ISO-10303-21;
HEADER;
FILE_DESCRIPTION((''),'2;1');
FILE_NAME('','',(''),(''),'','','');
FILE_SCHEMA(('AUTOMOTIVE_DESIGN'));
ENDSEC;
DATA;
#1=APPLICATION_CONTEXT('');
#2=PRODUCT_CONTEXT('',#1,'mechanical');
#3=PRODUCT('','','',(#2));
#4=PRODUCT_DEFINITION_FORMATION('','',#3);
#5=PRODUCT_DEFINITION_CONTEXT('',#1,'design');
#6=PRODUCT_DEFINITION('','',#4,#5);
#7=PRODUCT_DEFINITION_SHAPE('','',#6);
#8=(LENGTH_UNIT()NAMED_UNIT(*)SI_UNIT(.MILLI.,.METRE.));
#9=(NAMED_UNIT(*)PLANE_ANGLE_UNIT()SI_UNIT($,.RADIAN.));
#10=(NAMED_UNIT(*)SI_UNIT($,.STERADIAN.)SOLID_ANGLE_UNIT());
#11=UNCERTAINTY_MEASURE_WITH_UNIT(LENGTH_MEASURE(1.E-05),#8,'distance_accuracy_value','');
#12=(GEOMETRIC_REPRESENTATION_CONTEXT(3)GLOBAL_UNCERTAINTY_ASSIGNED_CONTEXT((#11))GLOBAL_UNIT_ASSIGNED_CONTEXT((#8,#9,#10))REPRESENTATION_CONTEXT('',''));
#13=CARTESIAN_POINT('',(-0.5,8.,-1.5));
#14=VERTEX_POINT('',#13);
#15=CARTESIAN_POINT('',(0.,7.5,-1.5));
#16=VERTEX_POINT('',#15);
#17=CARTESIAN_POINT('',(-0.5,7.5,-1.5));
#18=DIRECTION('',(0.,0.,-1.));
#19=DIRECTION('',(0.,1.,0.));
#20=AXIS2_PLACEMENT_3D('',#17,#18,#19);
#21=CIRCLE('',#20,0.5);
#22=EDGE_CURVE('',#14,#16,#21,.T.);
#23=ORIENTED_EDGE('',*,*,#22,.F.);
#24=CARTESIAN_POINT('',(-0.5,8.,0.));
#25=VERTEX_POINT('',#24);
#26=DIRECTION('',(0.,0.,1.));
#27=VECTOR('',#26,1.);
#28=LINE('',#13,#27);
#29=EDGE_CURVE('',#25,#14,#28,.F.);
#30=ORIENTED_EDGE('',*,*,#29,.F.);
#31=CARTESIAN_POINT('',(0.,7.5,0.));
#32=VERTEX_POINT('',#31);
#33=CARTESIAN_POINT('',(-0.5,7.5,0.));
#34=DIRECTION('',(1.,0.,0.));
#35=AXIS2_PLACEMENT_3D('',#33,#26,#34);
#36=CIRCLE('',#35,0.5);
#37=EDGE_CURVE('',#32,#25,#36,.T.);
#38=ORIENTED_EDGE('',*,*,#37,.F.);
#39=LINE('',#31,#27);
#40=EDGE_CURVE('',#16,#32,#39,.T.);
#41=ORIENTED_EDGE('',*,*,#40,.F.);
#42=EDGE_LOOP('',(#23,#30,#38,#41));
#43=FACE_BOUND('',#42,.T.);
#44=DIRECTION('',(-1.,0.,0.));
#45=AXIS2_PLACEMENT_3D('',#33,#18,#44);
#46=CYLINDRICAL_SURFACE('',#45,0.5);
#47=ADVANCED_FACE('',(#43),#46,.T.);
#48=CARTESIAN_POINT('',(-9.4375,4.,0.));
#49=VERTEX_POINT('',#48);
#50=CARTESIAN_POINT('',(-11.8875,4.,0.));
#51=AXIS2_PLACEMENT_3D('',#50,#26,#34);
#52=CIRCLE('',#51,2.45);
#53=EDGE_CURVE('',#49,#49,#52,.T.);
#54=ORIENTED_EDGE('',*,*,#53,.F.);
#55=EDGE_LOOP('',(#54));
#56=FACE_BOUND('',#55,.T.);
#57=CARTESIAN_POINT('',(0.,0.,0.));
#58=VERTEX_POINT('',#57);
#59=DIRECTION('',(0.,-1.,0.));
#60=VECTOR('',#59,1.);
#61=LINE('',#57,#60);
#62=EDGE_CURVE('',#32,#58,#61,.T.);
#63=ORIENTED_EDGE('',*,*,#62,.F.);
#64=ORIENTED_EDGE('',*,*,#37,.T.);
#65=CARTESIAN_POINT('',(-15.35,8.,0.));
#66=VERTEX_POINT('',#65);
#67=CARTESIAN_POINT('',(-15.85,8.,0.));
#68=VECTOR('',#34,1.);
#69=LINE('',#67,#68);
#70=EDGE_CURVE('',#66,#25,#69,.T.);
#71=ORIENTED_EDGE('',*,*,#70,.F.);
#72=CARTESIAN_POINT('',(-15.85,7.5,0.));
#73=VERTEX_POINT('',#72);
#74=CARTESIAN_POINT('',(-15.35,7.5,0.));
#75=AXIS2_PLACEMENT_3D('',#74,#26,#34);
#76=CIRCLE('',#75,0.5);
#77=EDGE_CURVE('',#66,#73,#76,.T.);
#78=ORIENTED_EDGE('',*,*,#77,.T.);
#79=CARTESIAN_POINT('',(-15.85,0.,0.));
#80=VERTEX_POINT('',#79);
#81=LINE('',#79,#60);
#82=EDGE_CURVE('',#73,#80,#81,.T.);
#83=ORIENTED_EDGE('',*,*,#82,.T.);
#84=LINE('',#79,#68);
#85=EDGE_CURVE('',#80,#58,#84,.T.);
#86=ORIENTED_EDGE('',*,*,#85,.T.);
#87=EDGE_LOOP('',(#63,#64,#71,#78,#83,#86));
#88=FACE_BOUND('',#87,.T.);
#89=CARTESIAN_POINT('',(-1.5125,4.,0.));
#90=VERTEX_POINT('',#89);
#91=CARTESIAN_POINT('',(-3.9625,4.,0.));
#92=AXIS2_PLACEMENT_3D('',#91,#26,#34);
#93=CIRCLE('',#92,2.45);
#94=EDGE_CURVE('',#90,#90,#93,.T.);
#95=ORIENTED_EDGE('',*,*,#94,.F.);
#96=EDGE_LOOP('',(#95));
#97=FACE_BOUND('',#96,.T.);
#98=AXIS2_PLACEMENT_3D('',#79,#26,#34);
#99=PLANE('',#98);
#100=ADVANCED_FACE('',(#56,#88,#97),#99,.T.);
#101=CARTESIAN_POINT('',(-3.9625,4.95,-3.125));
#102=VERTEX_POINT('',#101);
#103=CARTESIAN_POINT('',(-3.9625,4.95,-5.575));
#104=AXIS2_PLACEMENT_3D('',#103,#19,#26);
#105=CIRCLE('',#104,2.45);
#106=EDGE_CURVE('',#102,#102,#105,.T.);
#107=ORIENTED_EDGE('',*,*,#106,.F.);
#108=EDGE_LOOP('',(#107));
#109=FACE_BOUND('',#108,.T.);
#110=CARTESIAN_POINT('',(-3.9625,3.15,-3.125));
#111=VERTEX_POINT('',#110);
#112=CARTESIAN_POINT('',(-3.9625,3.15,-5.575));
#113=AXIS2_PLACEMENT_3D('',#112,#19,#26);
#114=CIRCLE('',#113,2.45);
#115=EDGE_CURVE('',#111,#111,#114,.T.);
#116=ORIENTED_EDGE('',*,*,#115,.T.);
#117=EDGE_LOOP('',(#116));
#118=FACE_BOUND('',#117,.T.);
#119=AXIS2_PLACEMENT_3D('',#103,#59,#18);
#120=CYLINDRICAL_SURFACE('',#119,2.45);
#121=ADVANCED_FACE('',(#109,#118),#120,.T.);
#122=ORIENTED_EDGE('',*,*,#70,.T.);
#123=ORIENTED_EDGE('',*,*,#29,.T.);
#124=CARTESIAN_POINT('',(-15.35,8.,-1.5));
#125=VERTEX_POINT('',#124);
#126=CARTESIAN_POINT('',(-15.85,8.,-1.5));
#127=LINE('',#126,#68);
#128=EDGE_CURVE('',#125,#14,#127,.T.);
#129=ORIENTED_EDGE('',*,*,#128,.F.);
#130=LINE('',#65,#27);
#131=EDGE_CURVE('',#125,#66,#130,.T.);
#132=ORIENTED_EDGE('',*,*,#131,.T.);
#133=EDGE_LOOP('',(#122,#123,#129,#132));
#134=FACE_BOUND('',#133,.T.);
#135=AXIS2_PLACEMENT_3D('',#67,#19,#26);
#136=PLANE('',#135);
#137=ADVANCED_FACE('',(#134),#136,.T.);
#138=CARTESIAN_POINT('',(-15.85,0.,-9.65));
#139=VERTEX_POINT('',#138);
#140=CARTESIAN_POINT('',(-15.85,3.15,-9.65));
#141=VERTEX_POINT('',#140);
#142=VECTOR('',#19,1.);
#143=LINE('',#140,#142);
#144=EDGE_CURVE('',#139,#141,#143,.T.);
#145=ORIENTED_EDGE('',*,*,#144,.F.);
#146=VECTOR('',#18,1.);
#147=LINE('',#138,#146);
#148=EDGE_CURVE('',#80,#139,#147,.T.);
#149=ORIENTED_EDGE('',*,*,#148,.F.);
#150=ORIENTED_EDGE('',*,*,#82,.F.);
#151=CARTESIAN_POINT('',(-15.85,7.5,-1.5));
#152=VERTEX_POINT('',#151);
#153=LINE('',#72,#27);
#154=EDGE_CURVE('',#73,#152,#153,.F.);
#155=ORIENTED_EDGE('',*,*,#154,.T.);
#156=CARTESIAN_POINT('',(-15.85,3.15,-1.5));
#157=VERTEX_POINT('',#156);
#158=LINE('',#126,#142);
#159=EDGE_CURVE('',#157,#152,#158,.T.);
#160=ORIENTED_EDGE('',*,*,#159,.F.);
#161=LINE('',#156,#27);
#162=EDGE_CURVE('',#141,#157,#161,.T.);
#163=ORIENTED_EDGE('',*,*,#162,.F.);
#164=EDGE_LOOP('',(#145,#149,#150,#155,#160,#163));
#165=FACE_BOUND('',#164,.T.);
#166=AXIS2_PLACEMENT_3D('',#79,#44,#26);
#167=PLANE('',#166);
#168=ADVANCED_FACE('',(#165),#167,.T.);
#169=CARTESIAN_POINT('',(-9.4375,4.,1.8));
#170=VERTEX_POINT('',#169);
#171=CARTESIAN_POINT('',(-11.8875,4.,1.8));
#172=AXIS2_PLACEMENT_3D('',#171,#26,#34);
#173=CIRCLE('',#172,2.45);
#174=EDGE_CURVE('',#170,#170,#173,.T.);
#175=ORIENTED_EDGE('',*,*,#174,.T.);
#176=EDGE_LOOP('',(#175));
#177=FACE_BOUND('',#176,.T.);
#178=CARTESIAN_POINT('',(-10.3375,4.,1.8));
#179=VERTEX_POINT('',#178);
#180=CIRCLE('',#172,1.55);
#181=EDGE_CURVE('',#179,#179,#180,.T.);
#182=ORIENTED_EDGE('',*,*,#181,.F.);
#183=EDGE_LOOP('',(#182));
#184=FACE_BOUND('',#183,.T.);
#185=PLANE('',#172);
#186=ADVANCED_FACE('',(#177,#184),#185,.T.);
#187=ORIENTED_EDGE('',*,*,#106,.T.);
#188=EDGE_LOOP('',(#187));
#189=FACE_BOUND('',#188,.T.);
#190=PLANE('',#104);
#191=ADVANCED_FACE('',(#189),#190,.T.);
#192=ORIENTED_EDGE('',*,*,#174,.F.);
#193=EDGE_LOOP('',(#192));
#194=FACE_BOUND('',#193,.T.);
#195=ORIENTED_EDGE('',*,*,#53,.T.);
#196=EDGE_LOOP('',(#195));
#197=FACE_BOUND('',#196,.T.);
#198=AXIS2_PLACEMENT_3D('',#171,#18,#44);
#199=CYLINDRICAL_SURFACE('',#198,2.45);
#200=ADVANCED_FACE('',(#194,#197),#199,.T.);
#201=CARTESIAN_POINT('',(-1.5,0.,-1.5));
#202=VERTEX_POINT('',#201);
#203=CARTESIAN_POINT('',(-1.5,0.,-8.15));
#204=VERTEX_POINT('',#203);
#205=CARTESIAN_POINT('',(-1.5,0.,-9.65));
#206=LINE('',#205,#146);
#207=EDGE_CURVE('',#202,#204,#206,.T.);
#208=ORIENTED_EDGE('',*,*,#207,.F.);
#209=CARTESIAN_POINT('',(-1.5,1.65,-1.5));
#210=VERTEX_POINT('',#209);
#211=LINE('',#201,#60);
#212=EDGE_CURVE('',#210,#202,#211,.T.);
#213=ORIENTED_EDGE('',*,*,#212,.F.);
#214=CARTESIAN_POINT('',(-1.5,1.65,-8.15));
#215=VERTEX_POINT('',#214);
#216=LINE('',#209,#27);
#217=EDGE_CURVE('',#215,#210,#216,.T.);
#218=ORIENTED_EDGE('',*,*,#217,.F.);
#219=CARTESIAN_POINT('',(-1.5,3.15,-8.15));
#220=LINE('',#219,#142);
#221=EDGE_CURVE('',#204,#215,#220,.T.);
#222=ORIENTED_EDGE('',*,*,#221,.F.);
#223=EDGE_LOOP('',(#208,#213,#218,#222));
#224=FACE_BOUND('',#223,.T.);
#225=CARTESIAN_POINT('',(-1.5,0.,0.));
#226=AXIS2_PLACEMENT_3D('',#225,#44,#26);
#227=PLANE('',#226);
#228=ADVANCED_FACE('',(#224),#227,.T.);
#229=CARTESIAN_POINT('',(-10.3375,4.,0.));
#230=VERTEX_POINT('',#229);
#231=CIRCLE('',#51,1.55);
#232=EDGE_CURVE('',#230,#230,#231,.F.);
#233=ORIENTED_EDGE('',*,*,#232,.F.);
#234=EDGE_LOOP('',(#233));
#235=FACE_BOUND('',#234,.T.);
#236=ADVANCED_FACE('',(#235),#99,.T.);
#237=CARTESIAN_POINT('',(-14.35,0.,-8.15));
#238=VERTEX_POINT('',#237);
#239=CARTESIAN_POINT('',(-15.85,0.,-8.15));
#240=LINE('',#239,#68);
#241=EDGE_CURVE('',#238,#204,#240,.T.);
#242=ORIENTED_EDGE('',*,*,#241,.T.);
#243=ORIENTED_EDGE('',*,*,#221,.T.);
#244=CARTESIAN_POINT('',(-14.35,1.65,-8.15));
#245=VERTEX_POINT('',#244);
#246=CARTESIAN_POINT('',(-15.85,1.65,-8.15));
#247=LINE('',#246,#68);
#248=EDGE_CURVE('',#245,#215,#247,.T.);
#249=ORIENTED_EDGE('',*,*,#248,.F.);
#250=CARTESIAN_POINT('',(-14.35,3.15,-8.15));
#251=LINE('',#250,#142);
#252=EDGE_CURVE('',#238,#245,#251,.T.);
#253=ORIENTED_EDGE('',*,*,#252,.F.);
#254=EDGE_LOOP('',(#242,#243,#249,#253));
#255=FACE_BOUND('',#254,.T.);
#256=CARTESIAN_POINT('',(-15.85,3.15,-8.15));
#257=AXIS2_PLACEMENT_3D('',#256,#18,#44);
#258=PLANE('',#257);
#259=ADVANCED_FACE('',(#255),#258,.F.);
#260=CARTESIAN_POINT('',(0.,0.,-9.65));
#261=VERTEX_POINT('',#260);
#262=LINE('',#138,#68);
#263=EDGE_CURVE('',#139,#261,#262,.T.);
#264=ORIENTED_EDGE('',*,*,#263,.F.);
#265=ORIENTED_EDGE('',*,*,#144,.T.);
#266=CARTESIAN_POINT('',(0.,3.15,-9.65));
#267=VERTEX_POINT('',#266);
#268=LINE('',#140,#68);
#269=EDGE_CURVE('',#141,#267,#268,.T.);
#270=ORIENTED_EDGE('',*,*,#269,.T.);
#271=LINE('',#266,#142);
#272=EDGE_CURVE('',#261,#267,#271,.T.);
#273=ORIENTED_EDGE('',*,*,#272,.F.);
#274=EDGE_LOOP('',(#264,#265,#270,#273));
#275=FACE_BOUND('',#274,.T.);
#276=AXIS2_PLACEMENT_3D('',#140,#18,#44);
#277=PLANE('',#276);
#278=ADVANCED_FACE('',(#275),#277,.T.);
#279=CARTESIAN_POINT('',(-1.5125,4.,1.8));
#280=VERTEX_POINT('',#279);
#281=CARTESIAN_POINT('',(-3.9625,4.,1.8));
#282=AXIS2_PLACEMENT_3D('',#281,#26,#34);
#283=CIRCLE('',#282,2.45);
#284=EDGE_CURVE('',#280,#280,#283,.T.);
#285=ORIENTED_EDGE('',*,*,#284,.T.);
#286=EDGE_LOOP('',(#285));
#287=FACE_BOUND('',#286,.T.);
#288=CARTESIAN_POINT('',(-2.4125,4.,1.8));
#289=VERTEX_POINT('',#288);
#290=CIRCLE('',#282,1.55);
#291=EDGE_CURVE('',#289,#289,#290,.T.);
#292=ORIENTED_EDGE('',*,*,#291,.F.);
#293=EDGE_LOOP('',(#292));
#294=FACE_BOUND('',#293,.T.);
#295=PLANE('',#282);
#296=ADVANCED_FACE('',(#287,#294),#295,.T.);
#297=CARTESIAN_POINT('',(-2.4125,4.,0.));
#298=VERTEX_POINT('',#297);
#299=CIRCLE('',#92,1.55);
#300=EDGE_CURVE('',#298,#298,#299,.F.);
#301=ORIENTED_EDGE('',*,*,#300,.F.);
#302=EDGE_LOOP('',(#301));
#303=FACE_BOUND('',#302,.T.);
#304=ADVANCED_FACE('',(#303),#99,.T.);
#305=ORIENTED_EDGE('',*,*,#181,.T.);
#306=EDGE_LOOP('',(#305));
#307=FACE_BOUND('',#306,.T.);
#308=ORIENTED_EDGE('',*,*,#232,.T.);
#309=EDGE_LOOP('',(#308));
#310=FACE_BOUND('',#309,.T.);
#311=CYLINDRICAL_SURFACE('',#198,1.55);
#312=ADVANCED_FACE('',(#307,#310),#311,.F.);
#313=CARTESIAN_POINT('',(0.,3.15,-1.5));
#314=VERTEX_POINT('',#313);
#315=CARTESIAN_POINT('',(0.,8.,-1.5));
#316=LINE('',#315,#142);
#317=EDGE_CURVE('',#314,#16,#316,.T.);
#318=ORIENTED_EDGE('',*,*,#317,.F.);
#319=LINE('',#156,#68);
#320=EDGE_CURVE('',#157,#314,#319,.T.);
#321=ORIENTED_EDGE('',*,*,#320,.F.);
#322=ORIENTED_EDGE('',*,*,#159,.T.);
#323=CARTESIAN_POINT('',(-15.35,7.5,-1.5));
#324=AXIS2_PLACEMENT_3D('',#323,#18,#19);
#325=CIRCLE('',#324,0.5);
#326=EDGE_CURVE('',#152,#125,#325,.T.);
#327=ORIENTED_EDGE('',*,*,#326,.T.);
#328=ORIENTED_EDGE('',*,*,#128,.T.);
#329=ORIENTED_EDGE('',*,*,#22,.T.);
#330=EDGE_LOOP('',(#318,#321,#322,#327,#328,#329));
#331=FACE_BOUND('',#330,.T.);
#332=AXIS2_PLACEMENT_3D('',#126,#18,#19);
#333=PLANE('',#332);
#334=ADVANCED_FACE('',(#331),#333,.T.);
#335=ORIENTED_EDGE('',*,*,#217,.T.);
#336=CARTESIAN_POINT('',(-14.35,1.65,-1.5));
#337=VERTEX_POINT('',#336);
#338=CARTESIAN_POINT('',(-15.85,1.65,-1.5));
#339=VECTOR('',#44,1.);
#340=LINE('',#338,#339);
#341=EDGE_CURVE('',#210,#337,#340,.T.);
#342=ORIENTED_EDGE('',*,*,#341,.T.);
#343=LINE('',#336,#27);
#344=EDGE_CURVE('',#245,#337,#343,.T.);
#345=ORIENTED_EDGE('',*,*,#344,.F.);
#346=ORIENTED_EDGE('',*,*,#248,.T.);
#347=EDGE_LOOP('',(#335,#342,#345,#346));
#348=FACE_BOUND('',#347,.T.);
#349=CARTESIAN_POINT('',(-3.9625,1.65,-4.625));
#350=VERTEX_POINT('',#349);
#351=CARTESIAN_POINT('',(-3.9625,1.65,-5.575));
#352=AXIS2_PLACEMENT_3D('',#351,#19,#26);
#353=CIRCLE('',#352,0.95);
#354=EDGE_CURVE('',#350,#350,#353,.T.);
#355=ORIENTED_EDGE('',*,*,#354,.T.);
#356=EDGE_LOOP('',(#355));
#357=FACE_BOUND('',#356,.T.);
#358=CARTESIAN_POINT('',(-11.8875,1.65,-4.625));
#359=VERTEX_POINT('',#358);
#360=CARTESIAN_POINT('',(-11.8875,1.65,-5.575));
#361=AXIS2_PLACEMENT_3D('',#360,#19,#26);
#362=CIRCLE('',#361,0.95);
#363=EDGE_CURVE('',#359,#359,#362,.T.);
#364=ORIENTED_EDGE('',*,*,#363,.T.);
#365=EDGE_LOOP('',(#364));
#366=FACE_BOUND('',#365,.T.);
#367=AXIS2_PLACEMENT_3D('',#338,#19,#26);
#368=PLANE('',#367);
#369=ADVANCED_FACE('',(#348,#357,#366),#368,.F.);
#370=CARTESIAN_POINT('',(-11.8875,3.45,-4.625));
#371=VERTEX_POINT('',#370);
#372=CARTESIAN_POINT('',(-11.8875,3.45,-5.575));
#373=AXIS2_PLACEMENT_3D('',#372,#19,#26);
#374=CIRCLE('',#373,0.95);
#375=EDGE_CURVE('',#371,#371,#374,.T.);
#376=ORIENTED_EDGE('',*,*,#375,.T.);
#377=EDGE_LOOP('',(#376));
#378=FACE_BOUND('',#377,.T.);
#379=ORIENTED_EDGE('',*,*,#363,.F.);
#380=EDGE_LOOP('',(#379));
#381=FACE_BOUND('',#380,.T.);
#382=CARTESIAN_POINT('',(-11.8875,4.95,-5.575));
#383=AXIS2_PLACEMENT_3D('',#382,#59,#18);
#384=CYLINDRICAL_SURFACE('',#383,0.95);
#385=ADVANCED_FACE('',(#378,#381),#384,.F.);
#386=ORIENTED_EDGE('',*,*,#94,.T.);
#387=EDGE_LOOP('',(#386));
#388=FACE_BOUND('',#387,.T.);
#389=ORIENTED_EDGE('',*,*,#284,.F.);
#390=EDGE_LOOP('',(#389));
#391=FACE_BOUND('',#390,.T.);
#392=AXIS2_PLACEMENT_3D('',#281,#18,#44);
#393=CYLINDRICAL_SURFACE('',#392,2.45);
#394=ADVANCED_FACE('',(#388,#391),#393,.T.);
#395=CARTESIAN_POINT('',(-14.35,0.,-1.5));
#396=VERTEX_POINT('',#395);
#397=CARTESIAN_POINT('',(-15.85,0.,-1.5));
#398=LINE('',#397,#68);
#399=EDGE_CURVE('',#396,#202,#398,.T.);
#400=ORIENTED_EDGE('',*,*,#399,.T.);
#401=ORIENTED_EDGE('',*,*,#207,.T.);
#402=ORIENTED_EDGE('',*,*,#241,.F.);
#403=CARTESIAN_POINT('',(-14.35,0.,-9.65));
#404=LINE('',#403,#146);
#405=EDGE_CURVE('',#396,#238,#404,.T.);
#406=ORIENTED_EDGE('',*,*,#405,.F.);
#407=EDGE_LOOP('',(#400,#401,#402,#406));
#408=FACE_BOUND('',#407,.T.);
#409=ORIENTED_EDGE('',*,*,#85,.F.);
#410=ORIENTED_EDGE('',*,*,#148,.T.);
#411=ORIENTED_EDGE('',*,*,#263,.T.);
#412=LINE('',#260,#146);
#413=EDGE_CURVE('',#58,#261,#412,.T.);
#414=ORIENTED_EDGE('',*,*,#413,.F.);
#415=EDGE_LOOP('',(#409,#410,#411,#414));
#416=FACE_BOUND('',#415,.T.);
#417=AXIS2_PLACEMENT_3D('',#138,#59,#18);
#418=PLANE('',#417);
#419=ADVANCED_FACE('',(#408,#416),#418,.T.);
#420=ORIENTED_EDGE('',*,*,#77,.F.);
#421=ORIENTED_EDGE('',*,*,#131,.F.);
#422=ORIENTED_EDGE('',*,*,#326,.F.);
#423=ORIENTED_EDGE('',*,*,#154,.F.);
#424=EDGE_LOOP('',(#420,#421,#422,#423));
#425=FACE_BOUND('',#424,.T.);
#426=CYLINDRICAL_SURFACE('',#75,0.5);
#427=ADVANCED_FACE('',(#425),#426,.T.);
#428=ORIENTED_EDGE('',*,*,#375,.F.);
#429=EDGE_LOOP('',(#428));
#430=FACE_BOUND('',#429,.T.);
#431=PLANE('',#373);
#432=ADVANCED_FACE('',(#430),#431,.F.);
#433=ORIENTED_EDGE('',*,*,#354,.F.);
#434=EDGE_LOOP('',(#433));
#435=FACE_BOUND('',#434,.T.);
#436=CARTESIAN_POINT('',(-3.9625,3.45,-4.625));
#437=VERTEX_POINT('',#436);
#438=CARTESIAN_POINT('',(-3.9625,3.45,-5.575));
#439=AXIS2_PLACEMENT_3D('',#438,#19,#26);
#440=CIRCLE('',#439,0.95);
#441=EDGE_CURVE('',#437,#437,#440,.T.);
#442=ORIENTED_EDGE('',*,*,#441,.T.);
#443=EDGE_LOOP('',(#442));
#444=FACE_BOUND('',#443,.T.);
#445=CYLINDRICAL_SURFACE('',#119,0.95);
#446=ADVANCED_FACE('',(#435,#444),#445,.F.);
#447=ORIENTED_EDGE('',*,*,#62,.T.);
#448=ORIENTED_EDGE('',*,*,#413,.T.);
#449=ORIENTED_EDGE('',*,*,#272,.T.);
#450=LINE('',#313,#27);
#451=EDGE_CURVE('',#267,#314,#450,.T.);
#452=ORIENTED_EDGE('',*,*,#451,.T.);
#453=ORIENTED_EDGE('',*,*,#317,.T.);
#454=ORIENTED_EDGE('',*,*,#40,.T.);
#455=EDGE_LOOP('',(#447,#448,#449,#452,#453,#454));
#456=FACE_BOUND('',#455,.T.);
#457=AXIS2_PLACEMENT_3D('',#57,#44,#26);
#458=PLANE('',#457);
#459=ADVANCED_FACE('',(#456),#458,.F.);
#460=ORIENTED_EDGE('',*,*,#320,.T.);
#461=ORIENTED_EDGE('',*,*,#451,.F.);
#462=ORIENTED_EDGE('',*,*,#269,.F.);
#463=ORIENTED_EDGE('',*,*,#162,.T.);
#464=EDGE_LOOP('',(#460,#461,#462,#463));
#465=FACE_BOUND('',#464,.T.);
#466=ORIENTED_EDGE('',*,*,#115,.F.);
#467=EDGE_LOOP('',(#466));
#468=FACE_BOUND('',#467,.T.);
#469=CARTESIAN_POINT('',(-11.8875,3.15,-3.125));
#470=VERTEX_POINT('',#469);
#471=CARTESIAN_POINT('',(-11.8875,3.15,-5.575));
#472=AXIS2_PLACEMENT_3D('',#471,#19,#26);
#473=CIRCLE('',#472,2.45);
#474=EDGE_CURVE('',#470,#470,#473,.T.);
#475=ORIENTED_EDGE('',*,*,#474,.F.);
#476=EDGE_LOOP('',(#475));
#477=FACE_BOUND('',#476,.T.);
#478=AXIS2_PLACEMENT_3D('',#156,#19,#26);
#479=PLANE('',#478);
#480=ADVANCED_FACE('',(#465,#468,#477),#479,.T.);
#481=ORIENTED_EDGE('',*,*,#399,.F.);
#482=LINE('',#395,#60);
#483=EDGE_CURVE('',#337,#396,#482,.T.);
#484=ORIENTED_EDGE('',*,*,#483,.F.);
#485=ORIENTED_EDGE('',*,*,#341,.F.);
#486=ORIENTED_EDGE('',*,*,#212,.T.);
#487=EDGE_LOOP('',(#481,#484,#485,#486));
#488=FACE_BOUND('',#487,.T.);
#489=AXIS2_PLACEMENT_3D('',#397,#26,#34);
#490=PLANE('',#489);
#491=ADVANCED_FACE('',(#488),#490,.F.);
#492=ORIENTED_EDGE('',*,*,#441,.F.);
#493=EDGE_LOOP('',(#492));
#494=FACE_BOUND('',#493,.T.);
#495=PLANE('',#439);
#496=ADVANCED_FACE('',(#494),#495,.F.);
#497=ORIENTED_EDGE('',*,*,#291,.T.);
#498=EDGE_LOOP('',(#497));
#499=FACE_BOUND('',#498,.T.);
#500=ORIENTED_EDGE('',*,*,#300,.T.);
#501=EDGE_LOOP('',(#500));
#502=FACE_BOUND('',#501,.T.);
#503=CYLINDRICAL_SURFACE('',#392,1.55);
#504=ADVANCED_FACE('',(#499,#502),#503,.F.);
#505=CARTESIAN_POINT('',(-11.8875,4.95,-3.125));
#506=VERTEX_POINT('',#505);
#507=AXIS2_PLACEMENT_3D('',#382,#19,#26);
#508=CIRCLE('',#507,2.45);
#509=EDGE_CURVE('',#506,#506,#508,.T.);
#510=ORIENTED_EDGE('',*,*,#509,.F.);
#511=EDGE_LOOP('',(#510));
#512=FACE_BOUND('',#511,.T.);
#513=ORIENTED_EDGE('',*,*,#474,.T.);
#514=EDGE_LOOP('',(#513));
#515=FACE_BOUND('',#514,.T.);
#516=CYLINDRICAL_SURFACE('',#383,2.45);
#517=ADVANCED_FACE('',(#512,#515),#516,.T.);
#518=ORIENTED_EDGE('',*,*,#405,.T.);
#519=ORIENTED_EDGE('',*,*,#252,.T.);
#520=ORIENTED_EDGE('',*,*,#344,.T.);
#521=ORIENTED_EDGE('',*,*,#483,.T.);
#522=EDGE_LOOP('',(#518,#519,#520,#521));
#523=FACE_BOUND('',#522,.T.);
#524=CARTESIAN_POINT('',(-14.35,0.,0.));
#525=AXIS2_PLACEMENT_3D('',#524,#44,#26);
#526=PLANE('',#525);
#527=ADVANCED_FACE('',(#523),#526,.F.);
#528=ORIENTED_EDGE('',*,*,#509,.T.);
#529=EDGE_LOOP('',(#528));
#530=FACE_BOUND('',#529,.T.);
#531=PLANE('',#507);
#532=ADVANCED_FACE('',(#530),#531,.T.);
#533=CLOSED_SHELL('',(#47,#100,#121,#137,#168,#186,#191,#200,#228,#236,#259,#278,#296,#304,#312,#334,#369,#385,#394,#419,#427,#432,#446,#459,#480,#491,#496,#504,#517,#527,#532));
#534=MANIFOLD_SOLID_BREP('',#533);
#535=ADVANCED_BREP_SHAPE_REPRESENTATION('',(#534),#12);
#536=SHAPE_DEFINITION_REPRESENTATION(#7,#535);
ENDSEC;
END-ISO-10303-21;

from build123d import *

# Parameters (mm, degrees)
BOSS_EXTRUDE1_DEPTH = 15.85
SKETCH2_R           = 2.45
SKETCH2_R_2         = 1.55
BOSS_EXTRUDE2_DEPTH = 1.8
SKETCH3_R           = 2.45
BOSS_EXTRUDE3_DEPTH = 1.8
SHELL1_OUTLINE_W    = 12.85
SHELL1_OUTLINE_H    = 6.65
SHELL1_DEPTH        = 1.65
SHELL1_START        = 1.65
SHELL1_2_OUTLINE_R  = 0.95
SHELL1_2_DEPTH      = 1.8
FILLET1_R           = 0.5


# Read off the part's stored shape, not the designer's step: Shell1
with BuildPart() as part:
    # Sketch1 → Boss-Extrude1 (new body)
    with BuildSketch(Plane(origin=(0, 0, 0), x_dir=(0, 0, -1), z_dir=(1, 0, 0))):
        Polygon((0, 0), (0, 8), (1.5, 8), (1.5, 3.15), (9.65, 3.15), (9.65, 0), align=None)
    extrude(amount=-BOSS_EXTRUDE1_DEPTH)

    # Sketch2 → Boss-Extrude2 (add)
    # profile 1 of 2: a face of its own
    with BuildSketch(Plane.XY):
        with Locations((-11.8875, 4)):
            Circle(SKETCH2_R)
        with Locations((-11.8875, 4)):
            Circle(SKETCH2_R_2, mode=Mode.SUBTRACT)
    # profile 2 of 2: a face of its own
    with BuildSketch(Plane.XY):
        with Locations((-3.9625, 4)):
            Circle(SKETCH2_R)
        with Locations((-3.9625, 4)):
            Circle(SKETCH2_R_2, mode=Mode.SUBTRACT)
    extrude(amount=BOSS_EXTRUDE2_DEPTH)

    # Sketch3 → Boss-Extrude3 (add)
    with BuildSketch(Plane(origin=(0, 3.15, 0), x_dir=(1, 0, 0), z_dir=(0, 1, 0))):
        with Locations(Location((-11.8875, 5.575, 0), (0, 0, 270))):
            Circle(SKETCH3_R)
        with Locations(Location((-3.9625, 5.575, 0), (0, 0, 270))):
            Circle(SKETCH3_R)
    extrude(amount=BOSS_EXTRUDE3_DEPTH)

    # Shell1 outline → Shell1 (cut)
    with BuildSketch(Plane(origin=(0, 0, 0), x_dir=(1, 0, 0), z_dir=(0, 1, 0))):
        with Locations((-7.925, 4.825)):
            Rectangle(SHELL1_OUTLINE_W, SHELL1_OUTLINE_H)
    extrude(amount=SHELL1_DEPTH, mode=Mode.SUBTRACT)

    # Shell1 2 outline → Shell1 2 (cut)
    with BuildSketch(Plane(origin=(0, 0, 0), x_dir=(1, 0, 0), z_dir=(0, 1, 0)).offset(SHELL1_START)):
        with Locations((-11.8875, 5.575)):
            Circle(SHELL1_2_OUTLINE_R)
        with Locations((-3.9625, 5.575)):
            Circle(SHELL1_2_OUTLINE_R)
    extrude(amount=SHELL1_2_DEPTH, mode=Mode.SUBTRACT)

    # Fillet1
    fillet1_edges = [part.edges().sort_by_distance(p)[0] for p in [
        (-15.85, 8, -0.75),
        (0, 8, -0.75),
    ]]
    fillet(fillet1_edges, radius=FILLET1_R)


solid = part.part
